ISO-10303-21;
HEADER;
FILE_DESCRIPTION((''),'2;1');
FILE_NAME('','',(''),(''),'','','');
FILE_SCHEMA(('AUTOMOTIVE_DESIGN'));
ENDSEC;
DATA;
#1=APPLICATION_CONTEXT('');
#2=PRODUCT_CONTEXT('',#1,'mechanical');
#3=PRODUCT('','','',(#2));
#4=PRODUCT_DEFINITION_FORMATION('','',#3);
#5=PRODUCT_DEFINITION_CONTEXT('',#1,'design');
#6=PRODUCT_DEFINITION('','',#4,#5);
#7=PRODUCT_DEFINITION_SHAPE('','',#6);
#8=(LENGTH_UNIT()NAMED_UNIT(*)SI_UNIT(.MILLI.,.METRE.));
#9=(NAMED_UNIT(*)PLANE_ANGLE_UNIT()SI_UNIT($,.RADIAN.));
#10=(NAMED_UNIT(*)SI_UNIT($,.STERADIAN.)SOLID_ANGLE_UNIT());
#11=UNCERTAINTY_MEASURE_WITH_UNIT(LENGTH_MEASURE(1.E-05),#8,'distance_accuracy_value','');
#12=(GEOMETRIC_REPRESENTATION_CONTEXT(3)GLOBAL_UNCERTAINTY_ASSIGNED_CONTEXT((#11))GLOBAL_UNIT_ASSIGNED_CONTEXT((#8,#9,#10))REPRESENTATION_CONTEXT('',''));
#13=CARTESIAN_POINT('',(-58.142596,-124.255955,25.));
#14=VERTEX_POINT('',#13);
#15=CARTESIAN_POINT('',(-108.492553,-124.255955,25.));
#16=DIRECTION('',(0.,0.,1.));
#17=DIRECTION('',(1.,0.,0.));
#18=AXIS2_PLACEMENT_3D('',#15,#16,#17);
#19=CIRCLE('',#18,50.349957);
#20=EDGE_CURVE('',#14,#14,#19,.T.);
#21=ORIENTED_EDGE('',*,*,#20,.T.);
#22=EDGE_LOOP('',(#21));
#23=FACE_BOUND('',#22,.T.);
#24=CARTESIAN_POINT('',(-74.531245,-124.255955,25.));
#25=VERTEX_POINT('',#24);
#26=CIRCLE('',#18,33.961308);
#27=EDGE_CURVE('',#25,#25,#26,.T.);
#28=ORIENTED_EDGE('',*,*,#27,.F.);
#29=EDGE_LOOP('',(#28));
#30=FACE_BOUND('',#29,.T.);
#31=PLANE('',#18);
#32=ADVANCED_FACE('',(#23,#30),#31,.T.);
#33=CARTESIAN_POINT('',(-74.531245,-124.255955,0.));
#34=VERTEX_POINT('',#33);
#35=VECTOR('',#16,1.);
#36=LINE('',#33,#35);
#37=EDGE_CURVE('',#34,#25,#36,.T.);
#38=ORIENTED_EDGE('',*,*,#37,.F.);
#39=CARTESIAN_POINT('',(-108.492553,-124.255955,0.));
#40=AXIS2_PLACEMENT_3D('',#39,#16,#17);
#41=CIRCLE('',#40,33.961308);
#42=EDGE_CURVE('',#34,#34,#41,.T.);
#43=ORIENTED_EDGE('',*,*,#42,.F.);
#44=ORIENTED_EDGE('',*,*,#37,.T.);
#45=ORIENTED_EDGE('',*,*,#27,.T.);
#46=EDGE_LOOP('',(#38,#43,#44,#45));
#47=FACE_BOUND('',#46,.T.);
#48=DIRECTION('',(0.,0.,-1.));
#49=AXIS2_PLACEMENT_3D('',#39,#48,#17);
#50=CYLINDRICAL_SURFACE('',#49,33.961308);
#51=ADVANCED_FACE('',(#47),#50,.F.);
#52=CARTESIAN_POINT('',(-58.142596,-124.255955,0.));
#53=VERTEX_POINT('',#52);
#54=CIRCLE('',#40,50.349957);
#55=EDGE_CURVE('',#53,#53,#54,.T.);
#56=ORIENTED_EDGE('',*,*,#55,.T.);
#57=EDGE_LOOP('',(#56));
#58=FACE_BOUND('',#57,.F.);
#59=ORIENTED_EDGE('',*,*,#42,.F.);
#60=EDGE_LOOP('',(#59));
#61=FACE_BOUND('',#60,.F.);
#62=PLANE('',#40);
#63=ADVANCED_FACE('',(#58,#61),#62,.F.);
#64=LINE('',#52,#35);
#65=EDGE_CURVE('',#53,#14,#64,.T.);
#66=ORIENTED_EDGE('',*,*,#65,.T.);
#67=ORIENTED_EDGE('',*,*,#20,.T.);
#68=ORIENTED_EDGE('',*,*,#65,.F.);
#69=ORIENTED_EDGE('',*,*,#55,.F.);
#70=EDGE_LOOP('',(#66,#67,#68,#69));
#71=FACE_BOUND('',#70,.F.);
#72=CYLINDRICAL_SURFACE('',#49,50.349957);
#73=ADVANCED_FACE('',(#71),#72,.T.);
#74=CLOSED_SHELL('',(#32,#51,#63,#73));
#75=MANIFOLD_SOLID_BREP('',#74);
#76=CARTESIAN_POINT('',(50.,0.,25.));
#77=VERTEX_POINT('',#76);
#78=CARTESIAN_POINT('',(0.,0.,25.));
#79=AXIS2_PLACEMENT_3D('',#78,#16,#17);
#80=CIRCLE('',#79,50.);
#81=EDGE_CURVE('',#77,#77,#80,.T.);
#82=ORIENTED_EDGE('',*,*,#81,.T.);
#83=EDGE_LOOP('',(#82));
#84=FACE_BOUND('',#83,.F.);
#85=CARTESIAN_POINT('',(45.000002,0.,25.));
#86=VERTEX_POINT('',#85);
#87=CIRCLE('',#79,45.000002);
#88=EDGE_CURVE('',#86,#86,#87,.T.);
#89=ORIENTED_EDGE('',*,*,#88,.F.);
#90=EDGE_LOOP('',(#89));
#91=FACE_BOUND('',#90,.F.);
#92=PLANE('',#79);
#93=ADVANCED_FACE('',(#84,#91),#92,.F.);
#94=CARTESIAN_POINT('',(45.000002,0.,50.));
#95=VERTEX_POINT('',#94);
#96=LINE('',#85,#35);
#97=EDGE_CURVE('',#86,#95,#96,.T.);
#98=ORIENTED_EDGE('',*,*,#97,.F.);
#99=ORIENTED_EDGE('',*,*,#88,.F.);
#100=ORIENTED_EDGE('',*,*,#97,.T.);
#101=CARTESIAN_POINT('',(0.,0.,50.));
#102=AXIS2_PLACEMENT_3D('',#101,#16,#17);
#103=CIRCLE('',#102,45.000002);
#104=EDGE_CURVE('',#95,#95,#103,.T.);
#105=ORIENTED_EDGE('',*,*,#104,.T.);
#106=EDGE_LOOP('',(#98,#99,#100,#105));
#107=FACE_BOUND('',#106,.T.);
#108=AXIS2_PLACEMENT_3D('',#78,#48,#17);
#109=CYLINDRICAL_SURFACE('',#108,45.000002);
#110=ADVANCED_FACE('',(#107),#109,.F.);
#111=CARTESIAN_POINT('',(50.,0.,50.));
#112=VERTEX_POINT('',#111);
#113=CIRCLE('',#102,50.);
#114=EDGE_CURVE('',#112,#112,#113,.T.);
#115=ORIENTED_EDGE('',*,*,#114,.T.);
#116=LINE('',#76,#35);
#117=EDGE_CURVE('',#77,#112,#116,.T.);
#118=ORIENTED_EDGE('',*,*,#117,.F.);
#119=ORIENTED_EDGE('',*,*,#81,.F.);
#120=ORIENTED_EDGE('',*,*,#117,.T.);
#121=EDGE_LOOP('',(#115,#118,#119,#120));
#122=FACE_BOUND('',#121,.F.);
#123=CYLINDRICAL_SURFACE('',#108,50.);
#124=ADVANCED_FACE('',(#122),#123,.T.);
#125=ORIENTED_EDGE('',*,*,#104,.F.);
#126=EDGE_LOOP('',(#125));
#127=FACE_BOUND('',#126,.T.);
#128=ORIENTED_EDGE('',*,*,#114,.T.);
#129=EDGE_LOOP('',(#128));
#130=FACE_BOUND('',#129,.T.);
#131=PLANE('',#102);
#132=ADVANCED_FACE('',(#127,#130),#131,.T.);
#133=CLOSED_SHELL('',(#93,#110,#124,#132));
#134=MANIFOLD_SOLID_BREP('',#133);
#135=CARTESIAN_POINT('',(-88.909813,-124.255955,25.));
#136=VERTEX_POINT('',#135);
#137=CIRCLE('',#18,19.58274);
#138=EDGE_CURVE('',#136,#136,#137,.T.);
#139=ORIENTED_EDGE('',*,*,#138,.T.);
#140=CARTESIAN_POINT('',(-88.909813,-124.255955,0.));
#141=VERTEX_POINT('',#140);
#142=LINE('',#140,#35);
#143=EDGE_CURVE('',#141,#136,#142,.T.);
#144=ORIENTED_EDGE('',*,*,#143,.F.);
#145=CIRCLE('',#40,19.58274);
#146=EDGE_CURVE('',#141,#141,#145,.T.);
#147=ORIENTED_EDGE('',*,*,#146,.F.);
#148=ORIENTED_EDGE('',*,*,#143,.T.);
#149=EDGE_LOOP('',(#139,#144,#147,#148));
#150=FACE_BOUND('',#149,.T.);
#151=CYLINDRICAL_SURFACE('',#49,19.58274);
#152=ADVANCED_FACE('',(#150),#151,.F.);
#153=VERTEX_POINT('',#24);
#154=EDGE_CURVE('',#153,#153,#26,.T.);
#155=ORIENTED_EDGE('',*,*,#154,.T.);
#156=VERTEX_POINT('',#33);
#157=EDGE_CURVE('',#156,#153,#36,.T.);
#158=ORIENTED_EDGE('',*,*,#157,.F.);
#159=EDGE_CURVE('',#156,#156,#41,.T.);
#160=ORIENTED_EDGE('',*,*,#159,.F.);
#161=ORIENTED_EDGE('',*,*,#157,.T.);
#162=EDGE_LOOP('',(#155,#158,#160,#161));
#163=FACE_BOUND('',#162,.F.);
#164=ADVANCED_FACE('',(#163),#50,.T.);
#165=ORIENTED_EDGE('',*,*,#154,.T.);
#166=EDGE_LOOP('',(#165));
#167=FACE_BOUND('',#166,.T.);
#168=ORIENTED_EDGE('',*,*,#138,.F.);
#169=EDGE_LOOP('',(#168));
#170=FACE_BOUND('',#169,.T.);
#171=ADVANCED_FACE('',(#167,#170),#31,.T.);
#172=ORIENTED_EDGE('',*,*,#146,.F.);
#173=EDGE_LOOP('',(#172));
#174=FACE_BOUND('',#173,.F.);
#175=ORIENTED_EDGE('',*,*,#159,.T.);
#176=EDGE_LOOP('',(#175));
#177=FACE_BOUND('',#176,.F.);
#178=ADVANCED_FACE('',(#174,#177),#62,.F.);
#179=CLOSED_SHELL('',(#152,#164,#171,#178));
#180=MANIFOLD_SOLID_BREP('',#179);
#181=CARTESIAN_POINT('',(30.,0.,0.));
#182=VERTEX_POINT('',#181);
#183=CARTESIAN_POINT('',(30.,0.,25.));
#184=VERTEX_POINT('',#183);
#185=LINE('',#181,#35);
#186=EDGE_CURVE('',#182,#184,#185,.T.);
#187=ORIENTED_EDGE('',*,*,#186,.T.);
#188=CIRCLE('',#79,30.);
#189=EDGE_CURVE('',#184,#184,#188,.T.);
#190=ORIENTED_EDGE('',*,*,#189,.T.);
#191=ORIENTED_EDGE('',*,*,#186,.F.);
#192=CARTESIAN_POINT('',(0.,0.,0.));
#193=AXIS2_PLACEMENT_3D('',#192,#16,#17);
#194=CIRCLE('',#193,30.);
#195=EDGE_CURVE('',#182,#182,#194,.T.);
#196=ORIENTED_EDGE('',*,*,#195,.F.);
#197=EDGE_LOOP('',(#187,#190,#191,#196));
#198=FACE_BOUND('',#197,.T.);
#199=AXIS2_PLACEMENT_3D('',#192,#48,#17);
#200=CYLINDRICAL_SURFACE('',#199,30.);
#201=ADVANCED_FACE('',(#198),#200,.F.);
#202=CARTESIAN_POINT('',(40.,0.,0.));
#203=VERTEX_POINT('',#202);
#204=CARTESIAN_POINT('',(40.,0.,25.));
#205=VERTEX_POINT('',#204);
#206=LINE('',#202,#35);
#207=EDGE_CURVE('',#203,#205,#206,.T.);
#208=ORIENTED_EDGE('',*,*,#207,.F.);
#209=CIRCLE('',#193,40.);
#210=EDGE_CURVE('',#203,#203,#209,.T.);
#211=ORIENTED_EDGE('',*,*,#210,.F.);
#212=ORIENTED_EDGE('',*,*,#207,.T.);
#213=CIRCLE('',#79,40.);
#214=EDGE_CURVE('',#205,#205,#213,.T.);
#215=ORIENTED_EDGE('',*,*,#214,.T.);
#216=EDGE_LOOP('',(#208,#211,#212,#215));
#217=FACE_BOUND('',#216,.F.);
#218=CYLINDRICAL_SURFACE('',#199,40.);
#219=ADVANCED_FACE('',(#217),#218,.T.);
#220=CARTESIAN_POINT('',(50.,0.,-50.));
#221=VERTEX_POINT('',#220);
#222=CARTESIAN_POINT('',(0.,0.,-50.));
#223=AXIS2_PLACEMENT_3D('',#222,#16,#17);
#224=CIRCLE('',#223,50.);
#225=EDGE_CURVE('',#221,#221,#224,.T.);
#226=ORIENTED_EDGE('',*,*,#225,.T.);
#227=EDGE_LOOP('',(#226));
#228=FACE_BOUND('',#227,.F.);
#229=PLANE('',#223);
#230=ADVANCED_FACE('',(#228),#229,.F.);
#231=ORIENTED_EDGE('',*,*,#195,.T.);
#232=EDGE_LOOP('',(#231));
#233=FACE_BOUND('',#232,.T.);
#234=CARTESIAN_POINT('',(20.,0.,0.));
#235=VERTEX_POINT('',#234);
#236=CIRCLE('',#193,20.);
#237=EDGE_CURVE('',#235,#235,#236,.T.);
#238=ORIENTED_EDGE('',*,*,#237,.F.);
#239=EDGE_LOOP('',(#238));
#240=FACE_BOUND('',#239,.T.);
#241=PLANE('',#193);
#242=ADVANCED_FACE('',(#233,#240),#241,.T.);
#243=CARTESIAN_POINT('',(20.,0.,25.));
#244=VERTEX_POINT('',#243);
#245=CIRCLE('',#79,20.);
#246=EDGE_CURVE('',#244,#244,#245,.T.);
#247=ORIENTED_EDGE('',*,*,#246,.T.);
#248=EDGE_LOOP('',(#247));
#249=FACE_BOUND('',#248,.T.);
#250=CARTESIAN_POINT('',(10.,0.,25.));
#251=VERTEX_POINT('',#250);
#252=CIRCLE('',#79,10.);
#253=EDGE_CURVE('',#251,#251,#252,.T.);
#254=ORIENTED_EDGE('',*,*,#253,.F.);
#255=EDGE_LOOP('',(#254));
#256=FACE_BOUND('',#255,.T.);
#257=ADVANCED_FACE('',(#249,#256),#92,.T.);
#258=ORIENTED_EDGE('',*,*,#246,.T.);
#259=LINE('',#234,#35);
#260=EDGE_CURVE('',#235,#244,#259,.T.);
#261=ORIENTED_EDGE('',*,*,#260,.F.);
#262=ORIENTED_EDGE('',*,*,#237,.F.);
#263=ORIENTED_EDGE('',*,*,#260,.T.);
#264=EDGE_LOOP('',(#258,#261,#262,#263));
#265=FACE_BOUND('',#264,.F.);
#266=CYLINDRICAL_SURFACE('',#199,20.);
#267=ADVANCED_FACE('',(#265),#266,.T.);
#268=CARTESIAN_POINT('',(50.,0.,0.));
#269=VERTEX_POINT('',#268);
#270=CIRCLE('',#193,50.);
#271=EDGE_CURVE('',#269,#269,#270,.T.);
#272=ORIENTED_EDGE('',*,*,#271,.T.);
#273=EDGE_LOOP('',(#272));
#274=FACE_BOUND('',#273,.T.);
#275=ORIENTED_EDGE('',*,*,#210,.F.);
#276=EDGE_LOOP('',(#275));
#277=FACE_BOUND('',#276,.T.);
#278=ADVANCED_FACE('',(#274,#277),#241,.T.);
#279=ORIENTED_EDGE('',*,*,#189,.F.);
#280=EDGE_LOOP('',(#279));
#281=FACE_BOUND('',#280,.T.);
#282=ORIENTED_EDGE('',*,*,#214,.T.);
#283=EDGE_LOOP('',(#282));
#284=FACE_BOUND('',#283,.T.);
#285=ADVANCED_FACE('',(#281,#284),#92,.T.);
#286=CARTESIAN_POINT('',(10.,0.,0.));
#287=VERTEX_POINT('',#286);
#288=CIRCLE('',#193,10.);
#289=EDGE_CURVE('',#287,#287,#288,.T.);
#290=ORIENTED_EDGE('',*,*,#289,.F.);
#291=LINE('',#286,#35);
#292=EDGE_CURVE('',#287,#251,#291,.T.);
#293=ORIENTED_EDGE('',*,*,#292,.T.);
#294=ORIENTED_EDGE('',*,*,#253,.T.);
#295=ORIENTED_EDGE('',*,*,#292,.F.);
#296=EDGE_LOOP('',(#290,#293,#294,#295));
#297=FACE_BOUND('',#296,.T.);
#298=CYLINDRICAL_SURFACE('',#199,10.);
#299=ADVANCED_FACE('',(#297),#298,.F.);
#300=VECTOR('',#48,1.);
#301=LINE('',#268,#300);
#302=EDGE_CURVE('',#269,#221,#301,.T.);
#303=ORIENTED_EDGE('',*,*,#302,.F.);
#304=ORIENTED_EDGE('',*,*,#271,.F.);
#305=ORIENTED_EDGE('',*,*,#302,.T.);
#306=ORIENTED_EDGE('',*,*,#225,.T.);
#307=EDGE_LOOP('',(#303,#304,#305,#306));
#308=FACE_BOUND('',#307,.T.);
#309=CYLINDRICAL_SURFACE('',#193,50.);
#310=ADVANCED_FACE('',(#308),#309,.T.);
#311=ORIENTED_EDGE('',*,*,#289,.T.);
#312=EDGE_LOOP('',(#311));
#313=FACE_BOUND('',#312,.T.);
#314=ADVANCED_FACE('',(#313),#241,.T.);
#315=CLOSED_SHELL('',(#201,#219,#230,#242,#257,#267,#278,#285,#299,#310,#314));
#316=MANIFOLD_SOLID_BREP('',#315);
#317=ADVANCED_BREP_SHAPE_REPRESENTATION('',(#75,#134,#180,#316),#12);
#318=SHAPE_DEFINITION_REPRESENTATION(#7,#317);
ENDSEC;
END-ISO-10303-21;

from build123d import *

# Parameters (mm, degrees)
F0_R      = 50
F1_DEPTH  = 50
F2_R      = 40
F2_R_2    = 30
F2_R_3    = 20
F2_R_4    = 10
F3_DEPTH  = 25
F4_R      = 50
F4_R_2    = 45.0000017881
F5_DEPTH  = 25
F6_R      = 50.3499570473
F6_R_2    = 33.9613081037
F7_DEPTH  = 25
F6_R_3    = 19.5827403344
F9_DEPTH  = 25
F10_DEPTH = 25


# Not quite as in the source:
# - a feature of the source that left no trace in its solid (it failed there, or was rolled back) is left out


with BuildPart() as f1:
    # F0 (on Top) → F1 (new body)
    with BuildSketch(Plane.XY):
        Circle(F0_R)
    extrude(amount=-F1_DEPTH)

    # F2 (on Top) → F3 (join)
    with BuildSketch(Plane.XY):
        Circle(F2_R)
        Circle(F2_R_2, mode=Mode.SUBTRACT)
        Circle(F2_R_3)
        Circle(F2_R_4, mode=Mode.SUBTRACT)
    extrude(amount=F3_DEPTH)


with BuildPart() as f5:
    # F4 (on face) → F5 (new body)
    with BuildSketch(Plane.XY.offset(25)):
        Circle(F4_R)
        Circle(F4_R_2, mode=Mode.SUBTRACT)
    extrude(amount=F5_DEPTH)


with BuildPart() as f7:
    # F6 (on Top) → F7 (new body)
    with BuildSketch(Plane.XY):
        with Locations((-108.4925532341, -124.2559552193)):
            Circle(F6_R)
        with Locations((-108.4925532341, -124.2559552193)):
            Circle(F6_R_2, mode=Mode.SUBTRACT)
    extrude(amount=F7_DEPTH)


with BuildPart() as f9:
    # F6 (on Top) → F9 (new body)
    with BuildSketch(Plane.XY):
        with Locations((-108.4925532341, -124.2559552193)):
            Circle(F6_R_2)
        with Locations((-108.4925532341, -124.2559552193)):
            Circle(F6_R_3, mode=Mode.SUBTRACT)
    extrude(amount=F9_DEPTH)


with BuildPart() as f10:
    # F6 (on Top) → F10 (new body)
    with BuildSketch(Plane.XY):
        with Locations((-108.4925532341, -124.2559552193)):
            Circle(F6_R)
        with Locations((-108.4925532341, -124.2559552193)):
            Circle(F6_R_2, mode=Mode.SUBTRACT)
    extrude(amount=F10_DEPTH)


solid = Compound([f1.part, f5.part, f9.part, f10.part])
